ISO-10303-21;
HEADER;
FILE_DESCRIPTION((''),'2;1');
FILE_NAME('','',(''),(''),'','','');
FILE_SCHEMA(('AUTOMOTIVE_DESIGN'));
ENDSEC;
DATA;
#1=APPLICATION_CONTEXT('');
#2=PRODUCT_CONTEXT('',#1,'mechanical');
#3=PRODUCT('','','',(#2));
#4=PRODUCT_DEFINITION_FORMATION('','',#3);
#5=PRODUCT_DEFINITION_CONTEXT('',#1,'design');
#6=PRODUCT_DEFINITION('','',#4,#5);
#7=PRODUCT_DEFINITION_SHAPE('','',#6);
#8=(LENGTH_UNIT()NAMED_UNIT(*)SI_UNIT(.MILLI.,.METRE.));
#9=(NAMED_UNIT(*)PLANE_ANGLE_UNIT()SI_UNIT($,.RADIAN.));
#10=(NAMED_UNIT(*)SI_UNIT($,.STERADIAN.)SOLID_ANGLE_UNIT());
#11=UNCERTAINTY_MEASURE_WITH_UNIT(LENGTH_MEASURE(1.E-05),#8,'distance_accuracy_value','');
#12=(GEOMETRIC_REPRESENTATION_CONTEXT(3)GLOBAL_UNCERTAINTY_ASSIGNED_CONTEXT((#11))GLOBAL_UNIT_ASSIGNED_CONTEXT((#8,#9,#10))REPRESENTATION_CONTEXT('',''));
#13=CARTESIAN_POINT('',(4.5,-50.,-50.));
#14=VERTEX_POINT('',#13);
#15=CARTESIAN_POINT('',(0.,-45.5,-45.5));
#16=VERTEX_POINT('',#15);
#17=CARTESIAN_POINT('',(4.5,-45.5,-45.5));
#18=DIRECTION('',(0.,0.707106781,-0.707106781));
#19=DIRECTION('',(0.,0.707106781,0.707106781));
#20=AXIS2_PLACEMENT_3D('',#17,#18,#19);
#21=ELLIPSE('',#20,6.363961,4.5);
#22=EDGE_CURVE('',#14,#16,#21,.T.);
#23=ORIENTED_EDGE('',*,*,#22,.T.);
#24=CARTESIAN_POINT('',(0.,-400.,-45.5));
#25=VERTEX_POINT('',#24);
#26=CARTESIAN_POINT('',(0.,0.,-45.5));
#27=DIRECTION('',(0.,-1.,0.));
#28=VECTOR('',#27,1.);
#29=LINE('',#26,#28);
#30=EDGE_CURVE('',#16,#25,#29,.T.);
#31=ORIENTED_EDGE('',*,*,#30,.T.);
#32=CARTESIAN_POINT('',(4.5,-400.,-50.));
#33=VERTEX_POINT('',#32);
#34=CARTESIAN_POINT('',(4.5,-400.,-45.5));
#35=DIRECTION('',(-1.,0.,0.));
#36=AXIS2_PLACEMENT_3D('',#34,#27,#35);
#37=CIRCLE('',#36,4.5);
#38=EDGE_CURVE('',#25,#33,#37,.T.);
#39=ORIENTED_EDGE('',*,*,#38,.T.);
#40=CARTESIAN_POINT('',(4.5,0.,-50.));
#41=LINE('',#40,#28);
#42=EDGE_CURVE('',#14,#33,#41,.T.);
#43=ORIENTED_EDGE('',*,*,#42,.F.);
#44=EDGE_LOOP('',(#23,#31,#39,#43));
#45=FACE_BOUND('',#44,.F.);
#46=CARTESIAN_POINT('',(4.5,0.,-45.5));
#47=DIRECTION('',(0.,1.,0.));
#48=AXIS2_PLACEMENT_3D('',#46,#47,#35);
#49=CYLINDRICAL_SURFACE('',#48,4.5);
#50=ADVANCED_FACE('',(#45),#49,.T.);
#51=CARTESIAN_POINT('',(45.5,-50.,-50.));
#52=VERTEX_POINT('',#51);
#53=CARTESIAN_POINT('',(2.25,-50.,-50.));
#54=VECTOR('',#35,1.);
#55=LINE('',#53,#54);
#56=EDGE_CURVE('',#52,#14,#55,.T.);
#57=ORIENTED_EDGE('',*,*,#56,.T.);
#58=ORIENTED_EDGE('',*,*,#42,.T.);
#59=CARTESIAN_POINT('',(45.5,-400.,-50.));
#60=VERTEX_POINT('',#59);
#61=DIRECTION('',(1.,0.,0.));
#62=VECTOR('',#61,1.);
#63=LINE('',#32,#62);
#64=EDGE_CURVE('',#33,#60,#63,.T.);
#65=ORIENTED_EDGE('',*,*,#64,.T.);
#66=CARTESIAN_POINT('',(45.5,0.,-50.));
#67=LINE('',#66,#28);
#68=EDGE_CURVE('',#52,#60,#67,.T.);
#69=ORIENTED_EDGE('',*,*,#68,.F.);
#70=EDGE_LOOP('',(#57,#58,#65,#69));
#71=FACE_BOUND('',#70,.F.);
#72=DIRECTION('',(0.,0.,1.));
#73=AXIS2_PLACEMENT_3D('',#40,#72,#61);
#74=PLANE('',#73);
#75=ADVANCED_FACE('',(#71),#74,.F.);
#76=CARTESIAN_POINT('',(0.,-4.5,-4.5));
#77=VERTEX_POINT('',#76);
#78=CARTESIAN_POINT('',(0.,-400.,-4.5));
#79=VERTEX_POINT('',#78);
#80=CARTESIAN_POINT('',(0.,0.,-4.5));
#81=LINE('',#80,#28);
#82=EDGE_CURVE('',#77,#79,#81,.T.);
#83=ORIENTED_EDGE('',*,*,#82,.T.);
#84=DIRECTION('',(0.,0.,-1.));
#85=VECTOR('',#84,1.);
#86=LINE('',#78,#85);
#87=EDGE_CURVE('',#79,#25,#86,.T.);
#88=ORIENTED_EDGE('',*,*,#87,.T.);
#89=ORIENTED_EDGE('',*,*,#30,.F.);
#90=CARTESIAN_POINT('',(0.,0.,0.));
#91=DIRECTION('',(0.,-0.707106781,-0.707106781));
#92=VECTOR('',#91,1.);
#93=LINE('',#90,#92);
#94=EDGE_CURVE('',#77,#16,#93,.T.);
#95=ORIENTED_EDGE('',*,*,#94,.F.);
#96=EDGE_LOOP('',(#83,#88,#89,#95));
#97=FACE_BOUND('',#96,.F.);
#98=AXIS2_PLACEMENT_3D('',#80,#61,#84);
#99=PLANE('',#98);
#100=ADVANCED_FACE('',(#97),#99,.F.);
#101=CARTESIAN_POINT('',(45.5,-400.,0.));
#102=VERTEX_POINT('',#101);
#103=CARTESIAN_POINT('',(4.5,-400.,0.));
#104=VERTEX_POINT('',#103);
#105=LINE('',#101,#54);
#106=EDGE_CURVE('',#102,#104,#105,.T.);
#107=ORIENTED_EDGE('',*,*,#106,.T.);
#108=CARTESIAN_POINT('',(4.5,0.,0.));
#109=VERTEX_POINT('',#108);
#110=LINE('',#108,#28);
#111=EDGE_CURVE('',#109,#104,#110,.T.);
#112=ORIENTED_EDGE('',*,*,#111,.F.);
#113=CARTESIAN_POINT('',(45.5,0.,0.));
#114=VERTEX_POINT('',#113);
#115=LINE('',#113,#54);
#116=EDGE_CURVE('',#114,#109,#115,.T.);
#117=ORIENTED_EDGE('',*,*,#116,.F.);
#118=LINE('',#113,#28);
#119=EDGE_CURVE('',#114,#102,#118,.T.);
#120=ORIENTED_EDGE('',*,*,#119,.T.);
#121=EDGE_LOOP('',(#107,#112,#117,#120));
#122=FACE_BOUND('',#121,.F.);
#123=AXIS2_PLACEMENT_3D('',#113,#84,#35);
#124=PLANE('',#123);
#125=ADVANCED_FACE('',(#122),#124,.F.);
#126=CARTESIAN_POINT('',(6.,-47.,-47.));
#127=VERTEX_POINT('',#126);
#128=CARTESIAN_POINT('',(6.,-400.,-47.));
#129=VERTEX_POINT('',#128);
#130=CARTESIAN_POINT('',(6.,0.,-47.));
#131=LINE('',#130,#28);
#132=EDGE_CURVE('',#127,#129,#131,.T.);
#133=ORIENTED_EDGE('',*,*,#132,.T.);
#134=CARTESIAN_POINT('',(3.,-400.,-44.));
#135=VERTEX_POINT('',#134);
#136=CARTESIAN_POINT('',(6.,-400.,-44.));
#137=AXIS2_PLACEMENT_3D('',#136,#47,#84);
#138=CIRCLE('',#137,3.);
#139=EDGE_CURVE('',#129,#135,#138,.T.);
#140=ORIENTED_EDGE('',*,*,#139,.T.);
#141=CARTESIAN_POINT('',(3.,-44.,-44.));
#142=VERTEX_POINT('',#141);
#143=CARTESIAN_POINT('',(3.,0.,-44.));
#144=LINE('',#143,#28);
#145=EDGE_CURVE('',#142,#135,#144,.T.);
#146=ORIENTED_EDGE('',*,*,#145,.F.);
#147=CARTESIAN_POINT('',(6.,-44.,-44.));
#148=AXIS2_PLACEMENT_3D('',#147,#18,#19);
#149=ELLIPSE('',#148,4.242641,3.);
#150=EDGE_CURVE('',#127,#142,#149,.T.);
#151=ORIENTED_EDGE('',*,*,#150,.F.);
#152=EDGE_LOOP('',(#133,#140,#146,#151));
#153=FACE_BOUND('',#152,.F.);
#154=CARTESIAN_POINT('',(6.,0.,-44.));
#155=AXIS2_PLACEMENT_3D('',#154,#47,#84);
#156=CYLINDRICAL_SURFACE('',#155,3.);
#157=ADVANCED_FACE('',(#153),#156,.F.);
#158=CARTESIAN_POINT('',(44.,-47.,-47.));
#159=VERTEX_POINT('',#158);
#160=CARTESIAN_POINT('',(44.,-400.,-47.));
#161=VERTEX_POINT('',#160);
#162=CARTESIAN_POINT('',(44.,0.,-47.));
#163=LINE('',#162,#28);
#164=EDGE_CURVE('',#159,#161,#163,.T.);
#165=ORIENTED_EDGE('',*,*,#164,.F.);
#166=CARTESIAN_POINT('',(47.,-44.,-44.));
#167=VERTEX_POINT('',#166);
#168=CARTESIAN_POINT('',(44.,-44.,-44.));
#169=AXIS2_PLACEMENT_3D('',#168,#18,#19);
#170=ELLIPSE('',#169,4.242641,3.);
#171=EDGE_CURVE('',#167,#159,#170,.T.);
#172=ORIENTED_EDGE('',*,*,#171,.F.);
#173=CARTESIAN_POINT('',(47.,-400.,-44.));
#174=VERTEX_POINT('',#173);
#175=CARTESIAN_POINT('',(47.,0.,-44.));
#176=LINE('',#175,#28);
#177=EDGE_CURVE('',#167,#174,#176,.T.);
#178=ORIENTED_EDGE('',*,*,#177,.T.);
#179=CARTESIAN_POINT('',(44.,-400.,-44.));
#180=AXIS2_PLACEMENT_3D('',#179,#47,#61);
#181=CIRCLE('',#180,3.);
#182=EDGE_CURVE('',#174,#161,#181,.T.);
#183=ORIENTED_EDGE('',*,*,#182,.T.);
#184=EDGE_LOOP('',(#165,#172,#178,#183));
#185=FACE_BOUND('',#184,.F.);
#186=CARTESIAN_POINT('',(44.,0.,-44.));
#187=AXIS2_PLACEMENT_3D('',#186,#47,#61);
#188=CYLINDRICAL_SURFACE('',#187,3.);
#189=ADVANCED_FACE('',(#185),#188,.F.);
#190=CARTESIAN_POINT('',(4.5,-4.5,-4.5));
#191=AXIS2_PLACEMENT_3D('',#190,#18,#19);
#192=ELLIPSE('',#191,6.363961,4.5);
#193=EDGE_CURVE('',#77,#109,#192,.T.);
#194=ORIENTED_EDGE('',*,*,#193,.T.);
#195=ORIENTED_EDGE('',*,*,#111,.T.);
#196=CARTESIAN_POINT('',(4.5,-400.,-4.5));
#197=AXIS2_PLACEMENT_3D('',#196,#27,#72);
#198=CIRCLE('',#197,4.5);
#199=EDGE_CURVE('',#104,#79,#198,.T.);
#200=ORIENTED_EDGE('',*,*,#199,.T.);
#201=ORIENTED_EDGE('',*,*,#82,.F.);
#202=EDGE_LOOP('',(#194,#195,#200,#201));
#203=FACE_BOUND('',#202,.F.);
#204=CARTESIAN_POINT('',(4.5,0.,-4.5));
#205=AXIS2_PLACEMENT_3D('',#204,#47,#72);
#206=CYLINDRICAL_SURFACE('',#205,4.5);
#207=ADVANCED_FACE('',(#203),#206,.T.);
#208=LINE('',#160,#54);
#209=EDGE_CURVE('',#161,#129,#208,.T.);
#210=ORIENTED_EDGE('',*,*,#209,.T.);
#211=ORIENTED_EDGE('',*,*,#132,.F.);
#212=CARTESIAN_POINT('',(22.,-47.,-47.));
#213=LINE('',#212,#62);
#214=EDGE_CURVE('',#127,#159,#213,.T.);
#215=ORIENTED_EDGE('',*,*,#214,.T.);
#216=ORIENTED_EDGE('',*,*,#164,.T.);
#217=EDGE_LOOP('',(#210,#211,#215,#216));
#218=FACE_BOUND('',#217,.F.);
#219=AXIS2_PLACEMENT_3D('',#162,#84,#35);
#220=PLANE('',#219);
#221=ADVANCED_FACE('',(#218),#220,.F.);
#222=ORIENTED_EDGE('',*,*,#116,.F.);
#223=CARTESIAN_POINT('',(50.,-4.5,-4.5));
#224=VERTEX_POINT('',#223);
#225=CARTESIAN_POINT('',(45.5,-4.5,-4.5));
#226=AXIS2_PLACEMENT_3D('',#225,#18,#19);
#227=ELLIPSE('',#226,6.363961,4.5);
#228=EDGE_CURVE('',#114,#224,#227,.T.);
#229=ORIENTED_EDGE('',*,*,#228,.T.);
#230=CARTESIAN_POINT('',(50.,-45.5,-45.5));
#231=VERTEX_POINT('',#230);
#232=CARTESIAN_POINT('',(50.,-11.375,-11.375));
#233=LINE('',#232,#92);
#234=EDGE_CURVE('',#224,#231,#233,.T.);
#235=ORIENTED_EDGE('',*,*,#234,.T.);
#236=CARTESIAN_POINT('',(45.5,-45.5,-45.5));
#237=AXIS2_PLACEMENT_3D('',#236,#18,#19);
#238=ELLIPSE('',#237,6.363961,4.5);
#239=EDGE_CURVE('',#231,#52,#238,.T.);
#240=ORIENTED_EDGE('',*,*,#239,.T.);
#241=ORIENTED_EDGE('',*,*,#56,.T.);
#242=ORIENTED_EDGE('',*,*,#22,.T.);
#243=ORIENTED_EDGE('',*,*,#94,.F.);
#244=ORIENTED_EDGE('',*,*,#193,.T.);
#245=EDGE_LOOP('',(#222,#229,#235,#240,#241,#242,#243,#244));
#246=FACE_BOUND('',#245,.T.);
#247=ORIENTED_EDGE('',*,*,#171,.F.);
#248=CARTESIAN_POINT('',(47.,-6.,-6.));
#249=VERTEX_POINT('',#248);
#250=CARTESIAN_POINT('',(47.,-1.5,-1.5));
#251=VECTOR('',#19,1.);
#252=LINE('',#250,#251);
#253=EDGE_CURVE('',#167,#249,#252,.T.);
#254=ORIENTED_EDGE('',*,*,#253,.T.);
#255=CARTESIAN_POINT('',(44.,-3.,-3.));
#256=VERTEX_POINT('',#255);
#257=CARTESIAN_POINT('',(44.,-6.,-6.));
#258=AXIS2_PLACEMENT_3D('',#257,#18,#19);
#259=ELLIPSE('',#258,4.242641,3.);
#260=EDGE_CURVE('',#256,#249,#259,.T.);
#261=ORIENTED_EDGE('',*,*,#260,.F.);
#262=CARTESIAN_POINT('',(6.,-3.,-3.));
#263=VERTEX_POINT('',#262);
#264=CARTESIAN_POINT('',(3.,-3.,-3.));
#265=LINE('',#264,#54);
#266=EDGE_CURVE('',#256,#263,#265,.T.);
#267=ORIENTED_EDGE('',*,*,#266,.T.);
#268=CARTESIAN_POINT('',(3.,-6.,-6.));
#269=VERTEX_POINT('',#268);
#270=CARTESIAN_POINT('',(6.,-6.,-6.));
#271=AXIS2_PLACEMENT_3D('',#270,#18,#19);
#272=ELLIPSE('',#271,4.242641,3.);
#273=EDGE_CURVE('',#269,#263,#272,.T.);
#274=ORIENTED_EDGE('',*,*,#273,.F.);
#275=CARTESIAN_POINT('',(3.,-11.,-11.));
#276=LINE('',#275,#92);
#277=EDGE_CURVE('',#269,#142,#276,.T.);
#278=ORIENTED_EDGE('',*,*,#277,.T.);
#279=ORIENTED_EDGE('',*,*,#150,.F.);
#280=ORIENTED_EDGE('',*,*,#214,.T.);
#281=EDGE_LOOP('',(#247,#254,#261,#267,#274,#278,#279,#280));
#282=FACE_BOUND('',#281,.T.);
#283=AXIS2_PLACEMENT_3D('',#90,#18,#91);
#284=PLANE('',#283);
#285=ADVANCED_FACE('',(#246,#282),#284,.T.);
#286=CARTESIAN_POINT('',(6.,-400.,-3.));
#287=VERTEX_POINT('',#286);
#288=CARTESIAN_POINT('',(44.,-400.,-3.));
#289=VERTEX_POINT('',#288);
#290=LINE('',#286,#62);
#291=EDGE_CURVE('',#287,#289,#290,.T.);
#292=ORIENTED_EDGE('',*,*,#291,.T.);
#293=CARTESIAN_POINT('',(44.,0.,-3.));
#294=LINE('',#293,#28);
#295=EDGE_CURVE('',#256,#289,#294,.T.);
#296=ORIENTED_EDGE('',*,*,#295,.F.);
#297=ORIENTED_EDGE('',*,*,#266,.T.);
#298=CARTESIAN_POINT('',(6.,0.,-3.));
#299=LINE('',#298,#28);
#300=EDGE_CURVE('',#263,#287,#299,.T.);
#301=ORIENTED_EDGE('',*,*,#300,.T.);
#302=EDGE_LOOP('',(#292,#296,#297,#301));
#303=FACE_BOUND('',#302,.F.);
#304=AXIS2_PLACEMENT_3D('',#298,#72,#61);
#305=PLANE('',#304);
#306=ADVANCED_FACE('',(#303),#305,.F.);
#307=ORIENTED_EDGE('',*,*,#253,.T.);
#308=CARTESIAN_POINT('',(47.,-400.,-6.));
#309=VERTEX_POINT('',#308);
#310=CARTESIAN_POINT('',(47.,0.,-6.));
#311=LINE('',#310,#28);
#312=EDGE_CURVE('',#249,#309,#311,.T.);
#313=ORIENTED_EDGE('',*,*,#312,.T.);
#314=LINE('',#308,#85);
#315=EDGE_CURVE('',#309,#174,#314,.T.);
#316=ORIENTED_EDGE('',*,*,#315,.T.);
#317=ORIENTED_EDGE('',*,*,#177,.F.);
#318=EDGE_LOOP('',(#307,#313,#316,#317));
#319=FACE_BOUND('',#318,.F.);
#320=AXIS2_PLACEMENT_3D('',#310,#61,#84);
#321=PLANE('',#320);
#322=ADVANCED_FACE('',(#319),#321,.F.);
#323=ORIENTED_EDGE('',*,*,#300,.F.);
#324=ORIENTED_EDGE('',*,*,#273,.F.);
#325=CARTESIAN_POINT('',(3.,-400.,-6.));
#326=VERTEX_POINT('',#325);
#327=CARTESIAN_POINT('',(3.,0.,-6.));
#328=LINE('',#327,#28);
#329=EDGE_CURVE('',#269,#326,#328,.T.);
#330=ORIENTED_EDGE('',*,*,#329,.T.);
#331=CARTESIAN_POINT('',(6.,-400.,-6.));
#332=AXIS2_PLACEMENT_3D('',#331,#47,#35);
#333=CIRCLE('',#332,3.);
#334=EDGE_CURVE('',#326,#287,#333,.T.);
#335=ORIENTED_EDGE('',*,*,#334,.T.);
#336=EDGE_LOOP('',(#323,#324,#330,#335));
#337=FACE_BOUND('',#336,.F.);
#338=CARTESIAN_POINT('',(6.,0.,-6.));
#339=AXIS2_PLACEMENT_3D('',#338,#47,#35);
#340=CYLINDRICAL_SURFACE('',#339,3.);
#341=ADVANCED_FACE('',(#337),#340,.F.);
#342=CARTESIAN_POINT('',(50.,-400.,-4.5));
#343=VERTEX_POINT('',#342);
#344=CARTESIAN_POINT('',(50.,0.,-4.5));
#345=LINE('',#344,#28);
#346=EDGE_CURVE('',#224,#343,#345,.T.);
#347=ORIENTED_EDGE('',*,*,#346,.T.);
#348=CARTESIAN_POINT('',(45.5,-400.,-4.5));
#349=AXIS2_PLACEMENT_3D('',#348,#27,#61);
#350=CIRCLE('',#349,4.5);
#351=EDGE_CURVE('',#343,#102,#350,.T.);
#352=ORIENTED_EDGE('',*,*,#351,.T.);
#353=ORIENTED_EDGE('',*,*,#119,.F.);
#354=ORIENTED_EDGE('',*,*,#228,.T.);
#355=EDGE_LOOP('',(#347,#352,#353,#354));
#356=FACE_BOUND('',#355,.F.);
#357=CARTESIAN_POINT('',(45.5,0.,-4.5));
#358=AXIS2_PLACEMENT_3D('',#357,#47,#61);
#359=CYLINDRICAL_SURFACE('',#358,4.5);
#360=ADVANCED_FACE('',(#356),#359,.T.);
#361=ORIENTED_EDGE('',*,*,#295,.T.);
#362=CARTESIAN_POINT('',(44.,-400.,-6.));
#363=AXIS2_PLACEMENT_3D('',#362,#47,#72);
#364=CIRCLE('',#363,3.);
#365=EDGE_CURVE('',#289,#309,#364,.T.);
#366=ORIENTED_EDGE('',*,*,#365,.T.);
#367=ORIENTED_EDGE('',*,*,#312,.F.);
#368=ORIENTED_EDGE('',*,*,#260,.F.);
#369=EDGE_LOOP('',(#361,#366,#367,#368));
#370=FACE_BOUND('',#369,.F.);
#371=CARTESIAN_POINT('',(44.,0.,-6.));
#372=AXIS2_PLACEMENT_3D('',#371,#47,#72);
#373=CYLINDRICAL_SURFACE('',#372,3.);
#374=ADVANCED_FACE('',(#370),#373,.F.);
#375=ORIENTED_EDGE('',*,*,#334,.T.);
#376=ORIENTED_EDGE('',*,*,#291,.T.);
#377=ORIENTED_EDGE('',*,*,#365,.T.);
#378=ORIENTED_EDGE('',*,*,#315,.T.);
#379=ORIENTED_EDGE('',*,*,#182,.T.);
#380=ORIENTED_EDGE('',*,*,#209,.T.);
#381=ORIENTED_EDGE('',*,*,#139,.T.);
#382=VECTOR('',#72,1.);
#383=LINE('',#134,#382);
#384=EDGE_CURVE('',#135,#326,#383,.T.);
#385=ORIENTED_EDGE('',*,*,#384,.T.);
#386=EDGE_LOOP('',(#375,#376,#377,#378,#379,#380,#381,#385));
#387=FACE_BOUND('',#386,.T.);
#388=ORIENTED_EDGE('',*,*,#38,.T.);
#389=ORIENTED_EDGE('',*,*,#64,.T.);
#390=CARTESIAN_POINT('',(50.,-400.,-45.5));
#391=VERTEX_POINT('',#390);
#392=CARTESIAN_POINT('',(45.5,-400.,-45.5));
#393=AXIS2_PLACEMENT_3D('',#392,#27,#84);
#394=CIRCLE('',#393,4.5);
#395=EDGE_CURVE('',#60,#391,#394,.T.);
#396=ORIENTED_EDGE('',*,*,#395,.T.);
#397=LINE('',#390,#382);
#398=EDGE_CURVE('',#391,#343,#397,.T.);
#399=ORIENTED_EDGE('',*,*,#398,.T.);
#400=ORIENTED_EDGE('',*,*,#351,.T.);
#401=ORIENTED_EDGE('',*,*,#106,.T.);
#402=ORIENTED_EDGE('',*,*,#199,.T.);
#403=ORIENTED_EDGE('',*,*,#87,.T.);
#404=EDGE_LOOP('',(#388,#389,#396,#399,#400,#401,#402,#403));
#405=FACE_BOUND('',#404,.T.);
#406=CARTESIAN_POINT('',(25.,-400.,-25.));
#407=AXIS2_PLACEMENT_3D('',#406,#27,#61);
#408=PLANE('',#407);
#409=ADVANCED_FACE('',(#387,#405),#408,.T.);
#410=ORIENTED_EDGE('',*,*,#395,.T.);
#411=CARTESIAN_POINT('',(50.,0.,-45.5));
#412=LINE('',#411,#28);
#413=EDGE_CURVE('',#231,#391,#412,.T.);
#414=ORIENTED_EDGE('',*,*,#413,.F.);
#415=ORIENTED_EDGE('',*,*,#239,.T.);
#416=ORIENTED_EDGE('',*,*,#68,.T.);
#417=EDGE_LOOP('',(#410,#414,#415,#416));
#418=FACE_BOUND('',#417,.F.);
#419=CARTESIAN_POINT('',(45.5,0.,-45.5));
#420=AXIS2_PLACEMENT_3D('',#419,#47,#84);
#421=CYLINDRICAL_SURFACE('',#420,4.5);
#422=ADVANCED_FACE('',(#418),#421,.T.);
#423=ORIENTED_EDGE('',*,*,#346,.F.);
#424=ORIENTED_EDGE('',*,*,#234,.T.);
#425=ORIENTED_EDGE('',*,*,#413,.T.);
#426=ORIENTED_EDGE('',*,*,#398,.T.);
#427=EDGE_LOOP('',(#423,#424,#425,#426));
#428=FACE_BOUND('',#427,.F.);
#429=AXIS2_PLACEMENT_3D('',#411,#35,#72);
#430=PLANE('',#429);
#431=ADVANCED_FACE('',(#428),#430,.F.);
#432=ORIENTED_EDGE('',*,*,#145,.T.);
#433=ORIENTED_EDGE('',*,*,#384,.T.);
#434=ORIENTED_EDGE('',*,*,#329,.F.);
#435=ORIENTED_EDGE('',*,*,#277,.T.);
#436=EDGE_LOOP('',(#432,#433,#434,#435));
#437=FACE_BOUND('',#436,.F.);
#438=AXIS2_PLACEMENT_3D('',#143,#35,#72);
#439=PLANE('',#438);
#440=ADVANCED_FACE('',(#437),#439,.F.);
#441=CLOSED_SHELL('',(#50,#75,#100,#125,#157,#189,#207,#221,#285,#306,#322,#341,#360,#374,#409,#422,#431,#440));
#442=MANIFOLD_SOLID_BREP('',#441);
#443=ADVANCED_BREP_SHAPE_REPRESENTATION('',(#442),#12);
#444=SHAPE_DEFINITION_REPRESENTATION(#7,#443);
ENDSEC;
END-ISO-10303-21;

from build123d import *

# Parameters (mm, degrees)
F1_DEPTH = 400
F3_DEPTH = 50.001


# Not quite as in the source:
# - a feature names something its author has since deleted; it is built from what else it names


with BuildPart() as f1:
    # F0 (on Front) → F1 (new body)
    with BuildSketch(Plane.XZ):
        with BuildLine():
            Line((45.5, 0), (4.5, 0))
            ThreePointArc((4.5, 0), (1.3180194847, -1.3180194847), (0, -4.5))
            Line((0, -4.5), (0, -45.5))
            ThreePointArc((0, -45.5), (1.3180194847, -48.6819805153), (4.5, -50))
            Line((4.5, -50), (45.5, -50))
            ThreePointArc((45.5, -50), (48.6819805153, -48.6819805153), (50, -45.5))
            Line((50, -45.5), (50, -4.5))
            ThreePointArc((50, -4.5), (48.6819805153, -1.3180194847), (45.5, 0))
        make_face()
        with BuildLine():
            ThreePointArc((3, -6), (3.8786796564, -3.8786796564), (6, -3))
            Line((6, -3), (44, -3))
            ThreePointArc((44, -3), (46.1213203436, -3.8786796564), (47, -6))
            Line((47, -6), (47, -44))
            ThreePointArc((47, -44), (46.1213203436, -46.1213203436), (44, -47))
            Line((44, -47), (6, -47))
            ThreePointArc((6, -47), (3.8786796564, -46.1213203436), (3, -44))
            Line((3, -44), (3, -6))
        make_face(mode=Mode.SUBTRACT)
    extrude(amount=F1_DEPTH)

    # F2 (on Right) → F3 (cut, through all)
    with BuildSketch(Plane.YZ):
        Polygon((29.2893218813, 0), (0, 0), (-45.5, -45.5), (-70.7106781187, -70.7106781187), (29.2893218813, -70.7106781187), align=None)
    extrude(amount=F3_DEPTH, mode=Mode.SUBTRACT)


solid = f1.part
